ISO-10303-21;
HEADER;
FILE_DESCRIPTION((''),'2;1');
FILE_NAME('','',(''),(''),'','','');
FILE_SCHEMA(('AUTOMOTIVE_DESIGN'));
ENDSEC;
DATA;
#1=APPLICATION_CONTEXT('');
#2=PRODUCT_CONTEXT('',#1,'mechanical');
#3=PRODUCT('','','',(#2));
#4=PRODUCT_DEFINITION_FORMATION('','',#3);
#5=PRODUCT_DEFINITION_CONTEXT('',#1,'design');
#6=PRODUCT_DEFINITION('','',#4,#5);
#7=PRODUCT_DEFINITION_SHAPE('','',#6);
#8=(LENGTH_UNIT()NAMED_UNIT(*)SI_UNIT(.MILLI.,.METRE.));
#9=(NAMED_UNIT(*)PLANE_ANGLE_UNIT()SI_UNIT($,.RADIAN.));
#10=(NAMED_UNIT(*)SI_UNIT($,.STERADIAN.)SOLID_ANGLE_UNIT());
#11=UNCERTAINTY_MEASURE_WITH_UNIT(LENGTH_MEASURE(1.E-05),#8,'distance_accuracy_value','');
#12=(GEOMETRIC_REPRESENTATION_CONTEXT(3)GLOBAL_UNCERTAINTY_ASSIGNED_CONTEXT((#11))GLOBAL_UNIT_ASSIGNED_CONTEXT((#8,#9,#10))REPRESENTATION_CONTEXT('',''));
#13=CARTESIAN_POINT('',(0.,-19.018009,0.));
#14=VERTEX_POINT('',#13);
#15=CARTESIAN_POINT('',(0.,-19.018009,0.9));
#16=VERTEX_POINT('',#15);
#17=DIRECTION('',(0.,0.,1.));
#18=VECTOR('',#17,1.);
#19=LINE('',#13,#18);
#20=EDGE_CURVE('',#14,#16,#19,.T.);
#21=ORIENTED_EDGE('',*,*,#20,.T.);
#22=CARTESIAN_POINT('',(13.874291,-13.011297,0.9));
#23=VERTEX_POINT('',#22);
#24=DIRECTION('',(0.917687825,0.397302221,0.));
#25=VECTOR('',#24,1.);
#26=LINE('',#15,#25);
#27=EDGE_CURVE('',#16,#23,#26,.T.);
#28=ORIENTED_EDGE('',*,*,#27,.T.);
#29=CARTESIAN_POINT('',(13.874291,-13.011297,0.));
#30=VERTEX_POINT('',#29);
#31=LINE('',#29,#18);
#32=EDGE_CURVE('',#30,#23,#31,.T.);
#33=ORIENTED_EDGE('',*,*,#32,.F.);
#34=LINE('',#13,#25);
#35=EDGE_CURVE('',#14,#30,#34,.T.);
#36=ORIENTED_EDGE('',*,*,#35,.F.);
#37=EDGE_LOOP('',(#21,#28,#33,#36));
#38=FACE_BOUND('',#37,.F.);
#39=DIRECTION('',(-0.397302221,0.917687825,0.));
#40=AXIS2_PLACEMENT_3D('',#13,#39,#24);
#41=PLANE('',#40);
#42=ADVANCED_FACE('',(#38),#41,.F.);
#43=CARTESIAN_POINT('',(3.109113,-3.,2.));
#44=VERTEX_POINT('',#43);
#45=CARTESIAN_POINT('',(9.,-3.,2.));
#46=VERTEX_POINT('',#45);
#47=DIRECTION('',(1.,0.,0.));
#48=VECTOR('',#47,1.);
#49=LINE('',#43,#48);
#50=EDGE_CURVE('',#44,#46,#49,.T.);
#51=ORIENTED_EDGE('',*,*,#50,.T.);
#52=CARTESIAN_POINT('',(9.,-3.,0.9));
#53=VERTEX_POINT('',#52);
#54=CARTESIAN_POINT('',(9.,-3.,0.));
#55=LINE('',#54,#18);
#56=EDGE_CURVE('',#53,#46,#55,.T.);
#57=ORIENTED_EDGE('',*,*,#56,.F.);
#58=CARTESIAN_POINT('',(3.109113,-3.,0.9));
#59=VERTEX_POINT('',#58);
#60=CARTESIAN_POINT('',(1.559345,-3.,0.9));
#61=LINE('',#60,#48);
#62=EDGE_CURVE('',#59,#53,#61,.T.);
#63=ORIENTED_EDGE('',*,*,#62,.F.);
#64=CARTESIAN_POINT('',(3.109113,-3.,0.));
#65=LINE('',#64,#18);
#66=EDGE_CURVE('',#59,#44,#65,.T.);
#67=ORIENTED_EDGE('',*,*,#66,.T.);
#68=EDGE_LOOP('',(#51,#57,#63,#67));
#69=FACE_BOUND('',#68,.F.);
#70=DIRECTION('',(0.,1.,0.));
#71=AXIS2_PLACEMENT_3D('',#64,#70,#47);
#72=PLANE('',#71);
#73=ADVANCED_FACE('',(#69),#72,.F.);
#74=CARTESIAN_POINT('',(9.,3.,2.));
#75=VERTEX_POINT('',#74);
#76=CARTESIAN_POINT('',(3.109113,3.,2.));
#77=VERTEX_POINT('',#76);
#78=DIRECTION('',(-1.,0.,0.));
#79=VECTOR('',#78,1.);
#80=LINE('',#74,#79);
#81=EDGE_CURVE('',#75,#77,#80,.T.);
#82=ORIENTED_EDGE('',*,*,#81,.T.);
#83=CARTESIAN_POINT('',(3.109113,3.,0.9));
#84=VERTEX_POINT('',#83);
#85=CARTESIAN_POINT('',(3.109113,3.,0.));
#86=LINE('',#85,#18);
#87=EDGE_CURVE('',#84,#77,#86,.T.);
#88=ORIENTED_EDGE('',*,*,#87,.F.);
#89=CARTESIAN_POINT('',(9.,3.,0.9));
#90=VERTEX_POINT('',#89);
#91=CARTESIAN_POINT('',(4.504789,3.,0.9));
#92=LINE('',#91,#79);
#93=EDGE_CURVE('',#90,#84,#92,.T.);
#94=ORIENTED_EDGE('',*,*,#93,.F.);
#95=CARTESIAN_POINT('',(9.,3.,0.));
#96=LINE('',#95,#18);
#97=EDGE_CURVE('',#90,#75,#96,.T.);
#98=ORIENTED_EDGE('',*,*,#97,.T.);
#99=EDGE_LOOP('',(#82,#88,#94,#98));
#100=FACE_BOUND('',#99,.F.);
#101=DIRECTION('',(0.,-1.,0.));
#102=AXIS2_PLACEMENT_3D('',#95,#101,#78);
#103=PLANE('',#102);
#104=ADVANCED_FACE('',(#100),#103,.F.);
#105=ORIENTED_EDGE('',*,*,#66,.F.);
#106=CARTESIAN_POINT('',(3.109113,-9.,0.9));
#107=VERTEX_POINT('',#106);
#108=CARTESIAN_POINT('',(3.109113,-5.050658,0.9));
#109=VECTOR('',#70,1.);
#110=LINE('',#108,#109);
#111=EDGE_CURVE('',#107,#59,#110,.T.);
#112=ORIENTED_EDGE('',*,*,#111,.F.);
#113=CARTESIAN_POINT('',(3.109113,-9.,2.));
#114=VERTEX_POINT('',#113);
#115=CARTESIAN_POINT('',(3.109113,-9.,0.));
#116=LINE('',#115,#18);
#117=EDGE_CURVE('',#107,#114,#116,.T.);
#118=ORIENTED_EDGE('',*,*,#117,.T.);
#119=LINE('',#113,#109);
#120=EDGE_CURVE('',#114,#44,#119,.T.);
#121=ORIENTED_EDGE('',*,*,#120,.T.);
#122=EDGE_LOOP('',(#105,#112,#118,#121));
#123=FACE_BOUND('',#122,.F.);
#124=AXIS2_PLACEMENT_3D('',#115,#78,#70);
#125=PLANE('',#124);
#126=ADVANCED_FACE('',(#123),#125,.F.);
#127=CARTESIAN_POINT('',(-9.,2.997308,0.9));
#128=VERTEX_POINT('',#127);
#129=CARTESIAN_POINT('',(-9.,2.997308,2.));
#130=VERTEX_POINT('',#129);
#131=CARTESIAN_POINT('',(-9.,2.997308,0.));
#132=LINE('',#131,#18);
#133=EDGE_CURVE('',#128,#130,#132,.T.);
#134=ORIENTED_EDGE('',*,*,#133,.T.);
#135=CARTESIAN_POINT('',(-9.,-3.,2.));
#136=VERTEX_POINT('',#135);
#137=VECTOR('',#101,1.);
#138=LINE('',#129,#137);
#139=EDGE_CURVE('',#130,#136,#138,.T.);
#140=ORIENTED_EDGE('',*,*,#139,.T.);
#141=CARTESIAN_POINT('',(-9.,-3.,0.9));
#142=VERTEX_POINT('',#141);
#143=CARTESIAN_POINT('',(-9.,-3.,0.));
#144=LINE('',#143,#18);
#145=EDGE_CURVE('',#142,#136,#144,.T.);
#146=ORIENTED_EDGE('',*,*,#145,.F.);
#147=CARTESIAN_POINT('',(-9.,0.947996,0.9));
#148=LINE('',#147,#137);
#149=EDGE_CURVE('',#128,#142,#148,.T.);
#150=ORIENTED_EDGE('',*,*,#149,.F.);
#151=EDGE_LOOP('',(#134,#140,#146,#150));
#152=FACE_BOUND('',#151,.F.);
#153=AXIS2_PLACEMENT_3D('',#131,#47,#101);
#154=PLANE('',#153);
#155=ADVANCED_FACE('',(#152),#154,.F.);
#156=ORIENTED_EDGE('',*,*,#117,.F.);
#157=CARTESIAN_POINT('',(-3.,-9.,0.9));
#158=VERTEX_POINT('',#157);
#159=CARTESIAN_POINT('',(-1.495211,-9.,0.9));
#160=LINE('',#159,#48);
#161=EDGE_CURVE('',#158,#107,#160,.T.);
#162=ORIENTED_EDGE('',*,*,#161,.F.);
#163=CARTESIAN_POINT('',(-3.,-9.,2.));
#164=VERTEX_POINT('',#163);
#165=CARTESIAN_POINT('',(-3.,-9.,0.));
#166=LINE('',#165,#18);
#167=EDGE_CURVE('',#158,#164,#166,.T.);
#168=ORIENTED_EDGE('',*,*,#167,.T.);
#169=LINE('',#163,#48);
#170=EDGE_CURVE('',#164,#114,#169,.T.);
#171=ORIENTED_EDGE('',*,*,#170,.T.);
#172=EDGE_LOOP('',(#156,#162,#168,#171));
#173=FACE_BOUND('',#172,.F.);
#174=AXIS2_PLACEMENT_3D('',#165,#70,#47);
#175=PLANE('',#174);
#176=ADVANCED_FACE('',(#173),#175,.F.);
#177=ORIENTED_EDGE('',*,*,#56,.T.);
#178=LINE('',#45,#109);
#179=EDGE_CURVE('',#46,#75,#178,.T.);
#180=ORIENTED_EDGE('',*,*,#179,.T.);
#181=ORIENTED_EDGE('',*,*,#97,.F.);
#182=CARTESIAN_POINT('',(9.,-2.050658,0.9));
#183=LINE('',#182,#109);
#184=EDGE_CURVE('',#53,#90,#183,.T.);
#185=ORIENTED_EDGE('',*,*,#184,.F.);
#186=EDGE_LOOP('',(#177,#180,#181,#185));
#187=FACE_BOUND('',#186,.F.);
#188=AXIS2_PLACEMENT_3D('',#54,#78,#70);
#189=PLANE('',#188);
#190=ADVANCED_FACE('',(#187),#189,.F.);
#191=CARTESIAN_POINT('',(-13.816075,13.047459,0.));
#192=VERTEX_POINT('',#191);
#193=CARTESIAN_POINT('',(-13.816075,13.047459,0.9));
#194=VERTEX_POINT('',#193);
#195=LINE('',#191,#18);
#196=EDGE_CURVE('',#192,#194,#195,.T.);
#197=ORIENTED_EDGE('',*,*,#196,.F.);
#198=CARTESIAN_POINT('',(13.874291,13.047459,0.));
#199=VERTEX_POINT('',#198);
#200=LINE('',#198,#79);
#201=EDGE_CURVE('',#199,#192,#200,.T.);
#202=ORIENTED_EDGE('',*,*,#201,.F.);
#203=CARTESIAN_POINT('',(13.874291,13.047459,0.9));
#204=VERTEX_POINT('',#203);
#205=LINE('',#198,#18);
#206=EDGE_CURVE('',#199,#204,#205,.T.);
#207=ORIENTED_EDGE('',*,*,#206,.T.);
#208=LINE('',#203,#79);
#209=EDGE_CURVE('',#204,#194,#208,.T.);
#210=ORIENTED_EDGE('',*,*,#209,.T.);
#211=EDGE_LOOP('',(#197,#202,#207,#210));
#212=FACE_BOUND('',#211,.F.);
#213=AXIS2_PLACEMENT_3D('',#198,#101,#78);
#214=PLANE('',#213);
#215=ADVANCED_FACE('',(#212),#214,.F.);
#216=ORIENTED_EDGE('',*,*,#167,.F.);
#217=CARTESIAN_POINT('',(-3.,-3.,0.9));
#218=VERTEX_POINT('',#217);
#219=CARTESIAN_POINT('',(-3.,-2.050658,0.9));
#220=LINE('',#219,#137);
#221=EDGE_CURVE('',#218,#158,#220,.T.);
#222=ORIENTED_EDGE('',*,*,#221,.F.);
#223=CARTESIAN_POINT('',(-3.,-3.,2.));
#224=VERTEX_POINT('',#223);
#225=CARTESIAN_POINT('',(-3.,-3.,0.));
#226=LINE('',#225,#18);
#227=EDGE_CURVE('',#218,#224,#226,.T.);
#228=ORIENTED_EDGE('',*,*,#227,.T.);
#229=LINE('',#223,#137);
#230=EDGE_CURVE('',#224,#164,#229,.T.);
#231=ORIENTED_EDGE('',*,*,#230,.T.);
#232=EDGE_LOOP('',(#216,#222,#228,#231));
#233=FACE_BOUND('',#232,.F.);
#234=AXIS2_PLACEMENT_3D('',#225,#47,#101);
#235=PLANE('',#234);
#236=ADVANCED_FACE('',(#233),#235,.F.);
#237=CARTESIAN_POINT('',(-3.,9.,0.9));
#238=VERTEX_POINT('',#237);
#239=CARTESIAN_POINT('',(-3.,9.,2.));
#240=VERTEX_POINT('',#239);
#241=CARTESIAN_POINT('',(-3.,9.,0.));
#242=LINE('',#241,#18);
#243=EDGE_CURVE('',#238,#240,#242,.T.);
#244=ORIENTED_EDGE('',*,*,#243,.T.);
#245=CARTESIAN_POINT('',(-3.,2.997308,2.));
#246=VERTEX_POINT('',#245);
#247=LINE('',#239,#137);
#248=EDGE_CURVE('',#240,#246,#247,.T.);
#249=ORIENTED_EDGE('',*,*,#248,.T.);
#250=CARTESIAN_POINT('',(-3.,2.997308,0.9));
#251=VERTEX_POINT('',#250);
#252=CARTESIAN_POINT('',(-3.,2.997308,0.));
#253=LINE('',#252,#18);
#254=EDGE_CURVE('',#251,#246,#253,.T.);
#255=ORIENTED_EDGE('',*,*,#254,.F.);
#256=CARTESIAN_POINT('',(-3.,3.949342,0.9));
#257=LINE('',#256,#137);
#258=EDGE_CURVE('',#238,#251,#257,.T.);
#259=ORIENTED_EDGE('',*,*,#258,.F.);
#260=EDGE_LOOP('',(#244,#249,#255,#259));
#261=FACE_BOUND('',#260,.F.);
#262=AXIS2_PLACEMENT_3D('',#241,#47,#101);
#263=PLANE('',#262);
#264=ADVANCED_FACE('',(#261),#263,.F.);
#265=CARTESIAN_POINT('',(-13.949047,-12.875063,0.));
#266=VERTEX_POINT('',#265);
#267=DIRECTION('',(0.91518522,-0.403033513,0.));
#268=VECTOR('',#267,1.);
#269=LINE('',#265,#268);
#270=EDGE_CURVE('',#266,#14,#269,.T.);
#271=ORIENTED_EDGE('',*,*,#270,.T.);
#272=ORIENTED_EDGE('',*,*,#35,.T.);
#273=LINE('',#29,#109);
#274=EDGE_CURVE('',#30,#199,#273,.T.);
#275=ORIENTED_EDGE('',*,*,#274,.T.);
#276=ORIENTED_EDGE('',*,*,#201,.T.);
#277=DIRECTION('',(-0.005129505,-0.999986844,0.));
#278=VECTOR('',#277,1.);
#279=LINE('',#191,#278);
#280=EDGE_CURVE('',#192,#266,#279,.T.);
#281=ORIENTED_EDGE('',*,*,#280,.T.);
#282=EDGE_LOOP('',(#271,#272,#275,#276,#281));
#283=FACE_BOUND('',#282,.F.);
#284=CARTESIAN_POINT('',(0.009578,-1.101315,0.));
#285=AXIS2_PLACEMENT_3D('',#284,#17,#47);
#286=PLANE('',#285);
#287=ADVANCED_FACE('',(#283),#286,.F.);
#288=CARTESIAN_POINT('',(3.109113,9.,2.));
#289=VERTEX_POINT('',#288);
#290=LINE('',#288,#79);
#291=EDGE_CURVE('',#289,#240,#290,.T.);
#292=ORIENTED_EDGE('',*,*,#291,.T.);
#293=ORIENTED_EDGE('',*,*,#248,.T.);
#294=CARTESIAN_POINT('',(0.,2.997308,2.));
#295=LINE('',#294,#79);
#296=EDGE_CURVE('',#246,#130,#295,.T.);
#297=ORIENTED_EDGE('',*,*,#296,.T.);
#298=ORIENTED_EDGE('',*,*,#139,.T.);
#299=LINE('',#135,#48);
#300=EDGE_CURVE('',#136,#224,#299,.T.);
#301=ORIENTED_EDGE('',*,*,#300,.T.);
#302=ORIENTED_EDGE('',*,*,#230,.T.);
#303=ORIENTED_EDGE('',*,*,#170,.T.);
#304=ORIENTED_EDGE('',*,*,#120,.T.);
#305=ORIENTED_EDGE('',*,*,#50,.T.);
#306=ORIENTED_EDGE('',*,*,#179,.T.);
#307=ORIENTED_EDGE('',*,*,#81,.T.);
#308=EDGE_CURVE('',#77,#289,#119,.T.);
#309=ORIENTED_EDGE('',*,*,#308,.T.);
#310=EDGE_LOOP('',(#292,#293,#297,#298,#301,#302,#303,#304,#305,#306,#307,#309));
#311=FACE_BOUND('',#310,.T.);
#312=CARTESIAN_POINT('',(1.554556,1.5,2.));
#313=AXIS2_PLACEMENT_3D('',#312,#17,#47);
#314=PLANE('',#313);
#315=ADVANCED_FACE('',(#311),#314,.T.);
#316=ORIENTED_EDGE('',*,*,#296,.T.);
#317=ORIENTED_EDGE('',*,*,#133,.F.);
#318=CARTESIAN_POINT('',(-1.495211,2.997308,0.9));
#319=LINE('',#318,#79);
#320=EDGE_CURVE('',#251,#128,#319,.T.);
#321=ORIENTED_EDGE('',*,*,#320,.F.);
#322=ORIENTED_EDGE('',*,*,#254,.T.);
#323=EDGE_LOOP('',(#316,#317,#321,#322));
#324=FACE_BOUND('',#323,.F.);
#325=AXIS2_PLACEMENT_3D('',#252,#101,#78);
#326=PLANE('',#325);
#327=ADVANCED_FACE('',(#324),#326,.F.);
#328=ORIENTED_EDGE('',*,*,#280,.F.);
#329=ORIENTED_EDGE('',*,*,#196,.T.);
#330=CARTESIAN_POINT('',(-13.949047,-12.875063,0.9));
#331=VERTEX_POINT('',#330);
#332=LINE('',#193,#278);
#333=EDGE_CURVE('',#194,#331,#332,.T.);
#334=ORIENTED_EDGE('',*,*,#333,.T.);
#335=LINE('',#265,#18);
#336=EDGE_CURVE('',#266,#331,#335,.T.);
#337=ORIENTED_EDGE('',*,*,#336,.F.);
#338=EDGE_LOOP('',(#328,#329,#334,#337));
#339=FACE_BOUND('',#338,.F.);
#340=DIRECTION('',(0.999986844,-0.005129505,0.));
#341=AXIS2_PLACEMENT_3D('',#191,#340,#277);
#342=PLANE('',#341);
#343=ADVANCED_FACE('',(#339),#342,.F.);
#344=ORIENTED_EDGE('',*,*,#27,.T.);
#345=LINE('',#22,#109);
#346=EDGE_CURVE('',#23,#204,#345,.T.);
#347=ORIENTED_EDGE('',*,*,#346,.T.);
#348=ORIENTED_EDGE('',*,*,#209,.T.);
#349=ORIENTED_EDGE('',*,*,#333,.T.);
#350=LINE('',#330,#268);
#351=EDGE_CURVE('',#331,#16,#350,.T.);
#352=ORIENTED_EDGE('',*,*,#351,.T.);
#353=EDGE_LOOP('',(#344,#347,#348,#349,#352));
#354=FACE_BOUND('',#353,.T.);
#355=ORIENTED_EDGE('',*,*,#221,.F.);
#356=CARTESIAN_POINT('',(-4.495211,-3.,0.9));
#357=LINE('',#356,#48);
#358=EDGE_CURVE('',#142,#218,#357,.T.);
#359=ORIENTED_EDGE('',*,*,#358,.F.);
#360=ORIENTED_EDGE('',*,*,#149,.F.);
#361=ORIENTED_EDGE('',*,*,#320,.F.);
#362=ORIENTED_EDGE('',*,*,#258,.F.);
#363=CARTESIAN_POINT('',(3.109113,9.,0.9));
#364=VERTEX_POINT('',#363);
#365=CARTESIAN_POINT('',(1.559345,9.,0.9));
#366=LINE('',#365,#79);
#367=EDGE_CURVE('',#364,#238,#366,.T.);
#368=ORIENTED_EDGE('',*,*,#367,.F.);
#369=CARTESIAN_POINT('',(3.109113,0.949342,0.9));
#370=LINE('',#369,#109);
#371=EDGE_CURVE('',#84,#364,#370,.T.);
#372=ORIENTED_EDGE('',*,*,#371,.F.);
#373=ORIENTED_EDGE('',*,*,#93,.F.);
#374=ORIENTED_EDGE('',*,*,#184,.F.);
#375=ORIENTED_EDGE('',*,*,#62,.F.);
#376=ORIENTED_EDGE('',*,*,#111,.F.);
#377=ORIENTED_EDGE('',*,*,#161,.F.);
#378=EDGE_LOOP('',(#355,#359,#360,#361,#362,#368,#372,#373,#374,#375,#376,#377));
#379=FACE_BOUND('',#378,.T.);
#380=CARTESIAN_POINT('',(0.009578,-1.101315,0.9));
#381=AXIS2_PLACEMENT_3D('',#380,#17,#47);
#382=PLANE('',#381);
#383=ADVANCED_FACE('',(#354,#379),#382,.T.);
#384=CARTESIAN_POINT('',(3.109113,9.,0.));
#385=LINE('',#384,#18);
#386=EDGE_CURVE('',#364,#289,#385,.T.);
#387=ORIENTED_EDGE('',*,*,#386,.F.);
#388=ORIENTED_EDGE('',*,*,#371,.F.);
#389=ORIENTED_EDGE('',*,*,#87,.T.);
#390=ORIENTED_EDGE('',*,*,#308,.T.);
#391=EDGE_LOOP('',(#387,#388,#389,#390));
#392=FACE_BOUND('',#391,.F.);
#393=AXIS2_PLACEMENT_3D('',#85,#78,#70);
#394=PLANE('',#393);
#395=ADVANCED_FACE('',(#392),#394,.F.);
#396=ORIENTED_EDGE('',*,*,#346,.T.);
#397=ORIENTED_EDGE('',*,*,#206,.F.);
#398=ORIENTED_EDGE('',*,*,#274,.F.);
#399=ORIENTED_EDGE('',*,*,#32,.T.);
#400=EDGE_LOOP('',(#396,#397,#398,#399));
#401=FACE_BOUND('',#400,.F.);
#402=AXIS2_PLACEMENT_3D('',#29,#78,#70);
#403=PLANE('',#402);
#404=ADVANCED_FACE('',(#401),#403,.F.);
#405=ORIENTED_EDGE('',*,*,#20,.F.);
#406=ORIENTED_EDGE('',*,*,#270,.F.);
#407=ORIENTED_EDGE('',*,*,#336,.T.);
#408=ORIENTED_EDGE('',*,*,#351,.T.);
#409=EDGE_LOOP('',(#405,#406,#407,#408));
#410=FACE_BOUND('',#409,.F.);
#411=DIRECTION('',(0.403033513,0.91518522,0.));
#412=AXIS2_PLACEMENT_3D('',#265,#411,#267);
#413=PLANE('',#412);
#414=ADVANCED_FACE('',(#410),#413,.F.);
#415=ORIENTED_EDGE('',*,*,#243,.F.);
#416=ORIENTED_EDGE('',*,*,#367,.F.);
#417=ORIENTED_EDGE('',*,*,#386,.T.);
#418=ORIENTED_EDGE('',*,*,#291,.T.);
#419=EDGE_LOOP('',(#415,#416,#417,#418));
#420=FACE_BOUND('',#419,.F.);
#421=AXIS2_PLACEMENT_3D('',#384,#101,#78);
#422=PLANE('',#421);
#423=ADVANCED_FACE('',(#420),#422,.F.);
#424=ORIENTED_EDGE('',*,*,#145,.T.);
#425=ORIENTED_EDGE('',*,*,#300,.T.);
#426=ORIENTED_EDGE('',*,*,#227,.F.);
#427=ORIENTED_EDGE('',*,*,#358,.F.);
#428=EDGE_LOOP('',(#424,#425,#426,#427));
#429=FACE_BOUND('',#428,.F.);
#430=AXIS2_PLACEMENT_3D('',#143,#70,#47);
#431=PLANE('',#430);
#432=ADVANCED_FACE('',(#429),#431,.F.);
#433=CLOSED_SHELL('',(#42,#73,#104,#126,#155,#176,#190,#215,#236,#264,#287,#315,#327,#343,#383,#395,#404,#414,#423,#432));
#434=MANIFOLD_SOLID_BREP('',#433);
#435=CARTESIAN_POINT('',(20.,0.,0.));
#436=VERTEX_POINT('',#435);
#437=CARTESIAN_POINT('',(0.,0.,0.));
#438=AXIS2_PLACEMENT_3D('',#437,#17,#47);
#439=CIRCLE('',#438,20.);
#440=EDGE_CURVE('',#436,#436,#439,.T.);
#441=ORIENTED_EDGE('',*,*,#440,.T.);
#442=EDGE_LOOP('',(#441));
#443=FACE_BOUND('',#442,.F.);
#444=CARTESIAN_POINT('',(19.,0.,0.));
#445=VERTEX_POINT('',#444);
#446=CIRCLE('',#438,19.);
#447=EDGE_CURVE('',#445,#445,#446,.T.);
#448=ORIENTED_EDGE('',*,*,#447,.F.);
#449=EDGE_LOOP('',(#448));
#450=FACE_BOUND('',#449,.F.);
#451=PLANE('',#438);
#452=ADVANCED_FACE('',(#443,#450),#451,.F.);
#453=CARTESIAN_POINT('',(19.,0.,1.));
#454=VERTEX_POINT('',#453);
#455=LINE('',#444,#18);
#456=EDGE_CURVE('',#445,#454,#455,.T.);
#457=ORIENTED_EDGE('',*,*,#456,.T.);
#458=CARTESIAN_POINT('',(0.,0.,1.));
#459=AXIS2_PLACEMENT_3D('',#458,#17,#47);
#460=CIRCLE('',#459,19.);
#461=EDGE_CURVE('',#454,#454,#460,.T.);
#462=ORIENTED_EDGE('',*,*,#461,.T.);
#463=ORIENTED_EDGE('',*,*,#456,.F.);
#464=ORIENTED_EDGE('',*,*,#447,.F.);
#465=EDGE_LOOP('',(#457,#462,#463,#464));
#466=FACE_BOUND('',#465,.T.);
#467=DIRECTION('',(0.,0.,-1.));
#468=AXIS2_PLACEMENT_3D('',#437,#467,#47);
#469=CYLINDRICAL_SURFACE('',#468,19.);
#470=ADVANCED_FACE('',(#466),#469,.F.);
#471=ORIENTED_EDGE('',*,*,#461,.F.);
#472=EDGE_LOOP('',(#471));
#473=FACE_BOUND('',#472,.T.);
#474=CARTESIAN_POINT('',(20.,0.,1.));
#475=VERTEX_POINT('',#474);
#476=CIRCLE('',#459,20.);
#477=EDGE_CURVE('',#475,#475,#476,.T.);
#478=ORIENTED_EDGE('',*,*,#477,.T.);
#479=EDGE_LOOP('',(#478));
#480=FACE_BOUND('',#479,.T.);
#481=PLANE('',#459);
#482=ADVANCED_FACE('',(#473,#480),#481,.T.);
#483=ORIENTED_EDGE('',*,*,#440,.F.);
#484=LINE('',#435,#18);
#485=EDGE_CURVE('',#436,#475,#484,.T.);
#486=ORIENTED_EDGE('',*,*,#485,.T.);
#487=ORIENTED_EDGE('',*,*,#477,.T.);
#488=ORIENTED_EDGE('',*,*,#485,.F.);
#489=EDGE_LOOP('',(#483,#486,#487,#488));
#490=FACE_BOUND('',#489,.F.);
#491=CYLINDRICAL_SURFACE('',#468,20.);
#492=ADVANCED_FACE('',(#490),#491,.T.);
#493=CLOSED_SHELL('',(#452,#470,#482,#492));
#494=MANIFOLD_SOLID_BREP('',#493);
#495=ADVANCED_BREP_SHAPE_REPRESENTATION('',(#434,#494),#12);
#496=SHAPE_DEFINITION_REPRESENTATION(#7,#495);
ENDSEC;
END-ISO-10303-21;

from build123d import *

# Parameters (mm, degrees)
F0_R     = 20
F0_R_2   = 19
F1_DEPTH = 1
F3_W     = 3
F3_H     = 3
F3_H_2   = 2.9973080382
F4_DEPTH = 2
F5_DEPTH = 0.9


with BuildPart() as f1:
    # F0 (on Top) → F1 (new body)
    with BuildSketch(Plane.XY):
        Circle(F0_R)
        Circle(F0_R_2, mode=Mode.SUBTRACT)
    extrude(amount=F1_DEPTH)


with BuildPart() as f4:
    # F3 (on Top) → F4 (new body)
    with BuildSketch(Plane.XY):
        Polygon((0, 2.9973080382), (0, 0), (3, 0), (3.1091126148, 0), (3.1091126148, 3), (0, 3), align=None)
        with Locations((-1.5, -1.5)):
            Rectangle(F3_W, F3_H)
        with Locations((-1.5, 1.4986540191)):
            Rectangle(F3_W, F3_H_2)
        Polygon((3, 0), (0, 0), (0, -3), (3.1091126148, -3), (3.1091126148, 0), align=None)
        Polygon((-3, -3), (-3, 0), (-3, 2.9973080382), (-9, 2.9973080382), (-9, -3), align=None)
        Polygon((-3, 2.9973080382), (0, 2.9973080382), (0, 3), (3.1091126148, 3), (3.1091126148, 9), (-3, 9), align=None)
        Polygon((3.1091126148, -3), (0, -3), (-3, -3), (-3, -9), (3.1091126148, -9), align=None)
        Polygon((3.1091126148, 3), (3.1091126148, 0), (3.1091126148, -3), (9, -3), (9, 3), align=None)
    extrude(amount=F4_DEPTH)

    # F2 (on Top) → F5 (join)
    with BuildSketch(Plane.XY):
        Polygon((13.8742914423, 13.047458604), (-13.8160753995, 13.047458604), (-13.9490468428, -12.8750633448), (0, -19.018009305), (13.8742914423, -13.0112969406), align=None)
    extrude(amount=F5_DEPTH)


solid = Compound([f1.part, f4.part])
